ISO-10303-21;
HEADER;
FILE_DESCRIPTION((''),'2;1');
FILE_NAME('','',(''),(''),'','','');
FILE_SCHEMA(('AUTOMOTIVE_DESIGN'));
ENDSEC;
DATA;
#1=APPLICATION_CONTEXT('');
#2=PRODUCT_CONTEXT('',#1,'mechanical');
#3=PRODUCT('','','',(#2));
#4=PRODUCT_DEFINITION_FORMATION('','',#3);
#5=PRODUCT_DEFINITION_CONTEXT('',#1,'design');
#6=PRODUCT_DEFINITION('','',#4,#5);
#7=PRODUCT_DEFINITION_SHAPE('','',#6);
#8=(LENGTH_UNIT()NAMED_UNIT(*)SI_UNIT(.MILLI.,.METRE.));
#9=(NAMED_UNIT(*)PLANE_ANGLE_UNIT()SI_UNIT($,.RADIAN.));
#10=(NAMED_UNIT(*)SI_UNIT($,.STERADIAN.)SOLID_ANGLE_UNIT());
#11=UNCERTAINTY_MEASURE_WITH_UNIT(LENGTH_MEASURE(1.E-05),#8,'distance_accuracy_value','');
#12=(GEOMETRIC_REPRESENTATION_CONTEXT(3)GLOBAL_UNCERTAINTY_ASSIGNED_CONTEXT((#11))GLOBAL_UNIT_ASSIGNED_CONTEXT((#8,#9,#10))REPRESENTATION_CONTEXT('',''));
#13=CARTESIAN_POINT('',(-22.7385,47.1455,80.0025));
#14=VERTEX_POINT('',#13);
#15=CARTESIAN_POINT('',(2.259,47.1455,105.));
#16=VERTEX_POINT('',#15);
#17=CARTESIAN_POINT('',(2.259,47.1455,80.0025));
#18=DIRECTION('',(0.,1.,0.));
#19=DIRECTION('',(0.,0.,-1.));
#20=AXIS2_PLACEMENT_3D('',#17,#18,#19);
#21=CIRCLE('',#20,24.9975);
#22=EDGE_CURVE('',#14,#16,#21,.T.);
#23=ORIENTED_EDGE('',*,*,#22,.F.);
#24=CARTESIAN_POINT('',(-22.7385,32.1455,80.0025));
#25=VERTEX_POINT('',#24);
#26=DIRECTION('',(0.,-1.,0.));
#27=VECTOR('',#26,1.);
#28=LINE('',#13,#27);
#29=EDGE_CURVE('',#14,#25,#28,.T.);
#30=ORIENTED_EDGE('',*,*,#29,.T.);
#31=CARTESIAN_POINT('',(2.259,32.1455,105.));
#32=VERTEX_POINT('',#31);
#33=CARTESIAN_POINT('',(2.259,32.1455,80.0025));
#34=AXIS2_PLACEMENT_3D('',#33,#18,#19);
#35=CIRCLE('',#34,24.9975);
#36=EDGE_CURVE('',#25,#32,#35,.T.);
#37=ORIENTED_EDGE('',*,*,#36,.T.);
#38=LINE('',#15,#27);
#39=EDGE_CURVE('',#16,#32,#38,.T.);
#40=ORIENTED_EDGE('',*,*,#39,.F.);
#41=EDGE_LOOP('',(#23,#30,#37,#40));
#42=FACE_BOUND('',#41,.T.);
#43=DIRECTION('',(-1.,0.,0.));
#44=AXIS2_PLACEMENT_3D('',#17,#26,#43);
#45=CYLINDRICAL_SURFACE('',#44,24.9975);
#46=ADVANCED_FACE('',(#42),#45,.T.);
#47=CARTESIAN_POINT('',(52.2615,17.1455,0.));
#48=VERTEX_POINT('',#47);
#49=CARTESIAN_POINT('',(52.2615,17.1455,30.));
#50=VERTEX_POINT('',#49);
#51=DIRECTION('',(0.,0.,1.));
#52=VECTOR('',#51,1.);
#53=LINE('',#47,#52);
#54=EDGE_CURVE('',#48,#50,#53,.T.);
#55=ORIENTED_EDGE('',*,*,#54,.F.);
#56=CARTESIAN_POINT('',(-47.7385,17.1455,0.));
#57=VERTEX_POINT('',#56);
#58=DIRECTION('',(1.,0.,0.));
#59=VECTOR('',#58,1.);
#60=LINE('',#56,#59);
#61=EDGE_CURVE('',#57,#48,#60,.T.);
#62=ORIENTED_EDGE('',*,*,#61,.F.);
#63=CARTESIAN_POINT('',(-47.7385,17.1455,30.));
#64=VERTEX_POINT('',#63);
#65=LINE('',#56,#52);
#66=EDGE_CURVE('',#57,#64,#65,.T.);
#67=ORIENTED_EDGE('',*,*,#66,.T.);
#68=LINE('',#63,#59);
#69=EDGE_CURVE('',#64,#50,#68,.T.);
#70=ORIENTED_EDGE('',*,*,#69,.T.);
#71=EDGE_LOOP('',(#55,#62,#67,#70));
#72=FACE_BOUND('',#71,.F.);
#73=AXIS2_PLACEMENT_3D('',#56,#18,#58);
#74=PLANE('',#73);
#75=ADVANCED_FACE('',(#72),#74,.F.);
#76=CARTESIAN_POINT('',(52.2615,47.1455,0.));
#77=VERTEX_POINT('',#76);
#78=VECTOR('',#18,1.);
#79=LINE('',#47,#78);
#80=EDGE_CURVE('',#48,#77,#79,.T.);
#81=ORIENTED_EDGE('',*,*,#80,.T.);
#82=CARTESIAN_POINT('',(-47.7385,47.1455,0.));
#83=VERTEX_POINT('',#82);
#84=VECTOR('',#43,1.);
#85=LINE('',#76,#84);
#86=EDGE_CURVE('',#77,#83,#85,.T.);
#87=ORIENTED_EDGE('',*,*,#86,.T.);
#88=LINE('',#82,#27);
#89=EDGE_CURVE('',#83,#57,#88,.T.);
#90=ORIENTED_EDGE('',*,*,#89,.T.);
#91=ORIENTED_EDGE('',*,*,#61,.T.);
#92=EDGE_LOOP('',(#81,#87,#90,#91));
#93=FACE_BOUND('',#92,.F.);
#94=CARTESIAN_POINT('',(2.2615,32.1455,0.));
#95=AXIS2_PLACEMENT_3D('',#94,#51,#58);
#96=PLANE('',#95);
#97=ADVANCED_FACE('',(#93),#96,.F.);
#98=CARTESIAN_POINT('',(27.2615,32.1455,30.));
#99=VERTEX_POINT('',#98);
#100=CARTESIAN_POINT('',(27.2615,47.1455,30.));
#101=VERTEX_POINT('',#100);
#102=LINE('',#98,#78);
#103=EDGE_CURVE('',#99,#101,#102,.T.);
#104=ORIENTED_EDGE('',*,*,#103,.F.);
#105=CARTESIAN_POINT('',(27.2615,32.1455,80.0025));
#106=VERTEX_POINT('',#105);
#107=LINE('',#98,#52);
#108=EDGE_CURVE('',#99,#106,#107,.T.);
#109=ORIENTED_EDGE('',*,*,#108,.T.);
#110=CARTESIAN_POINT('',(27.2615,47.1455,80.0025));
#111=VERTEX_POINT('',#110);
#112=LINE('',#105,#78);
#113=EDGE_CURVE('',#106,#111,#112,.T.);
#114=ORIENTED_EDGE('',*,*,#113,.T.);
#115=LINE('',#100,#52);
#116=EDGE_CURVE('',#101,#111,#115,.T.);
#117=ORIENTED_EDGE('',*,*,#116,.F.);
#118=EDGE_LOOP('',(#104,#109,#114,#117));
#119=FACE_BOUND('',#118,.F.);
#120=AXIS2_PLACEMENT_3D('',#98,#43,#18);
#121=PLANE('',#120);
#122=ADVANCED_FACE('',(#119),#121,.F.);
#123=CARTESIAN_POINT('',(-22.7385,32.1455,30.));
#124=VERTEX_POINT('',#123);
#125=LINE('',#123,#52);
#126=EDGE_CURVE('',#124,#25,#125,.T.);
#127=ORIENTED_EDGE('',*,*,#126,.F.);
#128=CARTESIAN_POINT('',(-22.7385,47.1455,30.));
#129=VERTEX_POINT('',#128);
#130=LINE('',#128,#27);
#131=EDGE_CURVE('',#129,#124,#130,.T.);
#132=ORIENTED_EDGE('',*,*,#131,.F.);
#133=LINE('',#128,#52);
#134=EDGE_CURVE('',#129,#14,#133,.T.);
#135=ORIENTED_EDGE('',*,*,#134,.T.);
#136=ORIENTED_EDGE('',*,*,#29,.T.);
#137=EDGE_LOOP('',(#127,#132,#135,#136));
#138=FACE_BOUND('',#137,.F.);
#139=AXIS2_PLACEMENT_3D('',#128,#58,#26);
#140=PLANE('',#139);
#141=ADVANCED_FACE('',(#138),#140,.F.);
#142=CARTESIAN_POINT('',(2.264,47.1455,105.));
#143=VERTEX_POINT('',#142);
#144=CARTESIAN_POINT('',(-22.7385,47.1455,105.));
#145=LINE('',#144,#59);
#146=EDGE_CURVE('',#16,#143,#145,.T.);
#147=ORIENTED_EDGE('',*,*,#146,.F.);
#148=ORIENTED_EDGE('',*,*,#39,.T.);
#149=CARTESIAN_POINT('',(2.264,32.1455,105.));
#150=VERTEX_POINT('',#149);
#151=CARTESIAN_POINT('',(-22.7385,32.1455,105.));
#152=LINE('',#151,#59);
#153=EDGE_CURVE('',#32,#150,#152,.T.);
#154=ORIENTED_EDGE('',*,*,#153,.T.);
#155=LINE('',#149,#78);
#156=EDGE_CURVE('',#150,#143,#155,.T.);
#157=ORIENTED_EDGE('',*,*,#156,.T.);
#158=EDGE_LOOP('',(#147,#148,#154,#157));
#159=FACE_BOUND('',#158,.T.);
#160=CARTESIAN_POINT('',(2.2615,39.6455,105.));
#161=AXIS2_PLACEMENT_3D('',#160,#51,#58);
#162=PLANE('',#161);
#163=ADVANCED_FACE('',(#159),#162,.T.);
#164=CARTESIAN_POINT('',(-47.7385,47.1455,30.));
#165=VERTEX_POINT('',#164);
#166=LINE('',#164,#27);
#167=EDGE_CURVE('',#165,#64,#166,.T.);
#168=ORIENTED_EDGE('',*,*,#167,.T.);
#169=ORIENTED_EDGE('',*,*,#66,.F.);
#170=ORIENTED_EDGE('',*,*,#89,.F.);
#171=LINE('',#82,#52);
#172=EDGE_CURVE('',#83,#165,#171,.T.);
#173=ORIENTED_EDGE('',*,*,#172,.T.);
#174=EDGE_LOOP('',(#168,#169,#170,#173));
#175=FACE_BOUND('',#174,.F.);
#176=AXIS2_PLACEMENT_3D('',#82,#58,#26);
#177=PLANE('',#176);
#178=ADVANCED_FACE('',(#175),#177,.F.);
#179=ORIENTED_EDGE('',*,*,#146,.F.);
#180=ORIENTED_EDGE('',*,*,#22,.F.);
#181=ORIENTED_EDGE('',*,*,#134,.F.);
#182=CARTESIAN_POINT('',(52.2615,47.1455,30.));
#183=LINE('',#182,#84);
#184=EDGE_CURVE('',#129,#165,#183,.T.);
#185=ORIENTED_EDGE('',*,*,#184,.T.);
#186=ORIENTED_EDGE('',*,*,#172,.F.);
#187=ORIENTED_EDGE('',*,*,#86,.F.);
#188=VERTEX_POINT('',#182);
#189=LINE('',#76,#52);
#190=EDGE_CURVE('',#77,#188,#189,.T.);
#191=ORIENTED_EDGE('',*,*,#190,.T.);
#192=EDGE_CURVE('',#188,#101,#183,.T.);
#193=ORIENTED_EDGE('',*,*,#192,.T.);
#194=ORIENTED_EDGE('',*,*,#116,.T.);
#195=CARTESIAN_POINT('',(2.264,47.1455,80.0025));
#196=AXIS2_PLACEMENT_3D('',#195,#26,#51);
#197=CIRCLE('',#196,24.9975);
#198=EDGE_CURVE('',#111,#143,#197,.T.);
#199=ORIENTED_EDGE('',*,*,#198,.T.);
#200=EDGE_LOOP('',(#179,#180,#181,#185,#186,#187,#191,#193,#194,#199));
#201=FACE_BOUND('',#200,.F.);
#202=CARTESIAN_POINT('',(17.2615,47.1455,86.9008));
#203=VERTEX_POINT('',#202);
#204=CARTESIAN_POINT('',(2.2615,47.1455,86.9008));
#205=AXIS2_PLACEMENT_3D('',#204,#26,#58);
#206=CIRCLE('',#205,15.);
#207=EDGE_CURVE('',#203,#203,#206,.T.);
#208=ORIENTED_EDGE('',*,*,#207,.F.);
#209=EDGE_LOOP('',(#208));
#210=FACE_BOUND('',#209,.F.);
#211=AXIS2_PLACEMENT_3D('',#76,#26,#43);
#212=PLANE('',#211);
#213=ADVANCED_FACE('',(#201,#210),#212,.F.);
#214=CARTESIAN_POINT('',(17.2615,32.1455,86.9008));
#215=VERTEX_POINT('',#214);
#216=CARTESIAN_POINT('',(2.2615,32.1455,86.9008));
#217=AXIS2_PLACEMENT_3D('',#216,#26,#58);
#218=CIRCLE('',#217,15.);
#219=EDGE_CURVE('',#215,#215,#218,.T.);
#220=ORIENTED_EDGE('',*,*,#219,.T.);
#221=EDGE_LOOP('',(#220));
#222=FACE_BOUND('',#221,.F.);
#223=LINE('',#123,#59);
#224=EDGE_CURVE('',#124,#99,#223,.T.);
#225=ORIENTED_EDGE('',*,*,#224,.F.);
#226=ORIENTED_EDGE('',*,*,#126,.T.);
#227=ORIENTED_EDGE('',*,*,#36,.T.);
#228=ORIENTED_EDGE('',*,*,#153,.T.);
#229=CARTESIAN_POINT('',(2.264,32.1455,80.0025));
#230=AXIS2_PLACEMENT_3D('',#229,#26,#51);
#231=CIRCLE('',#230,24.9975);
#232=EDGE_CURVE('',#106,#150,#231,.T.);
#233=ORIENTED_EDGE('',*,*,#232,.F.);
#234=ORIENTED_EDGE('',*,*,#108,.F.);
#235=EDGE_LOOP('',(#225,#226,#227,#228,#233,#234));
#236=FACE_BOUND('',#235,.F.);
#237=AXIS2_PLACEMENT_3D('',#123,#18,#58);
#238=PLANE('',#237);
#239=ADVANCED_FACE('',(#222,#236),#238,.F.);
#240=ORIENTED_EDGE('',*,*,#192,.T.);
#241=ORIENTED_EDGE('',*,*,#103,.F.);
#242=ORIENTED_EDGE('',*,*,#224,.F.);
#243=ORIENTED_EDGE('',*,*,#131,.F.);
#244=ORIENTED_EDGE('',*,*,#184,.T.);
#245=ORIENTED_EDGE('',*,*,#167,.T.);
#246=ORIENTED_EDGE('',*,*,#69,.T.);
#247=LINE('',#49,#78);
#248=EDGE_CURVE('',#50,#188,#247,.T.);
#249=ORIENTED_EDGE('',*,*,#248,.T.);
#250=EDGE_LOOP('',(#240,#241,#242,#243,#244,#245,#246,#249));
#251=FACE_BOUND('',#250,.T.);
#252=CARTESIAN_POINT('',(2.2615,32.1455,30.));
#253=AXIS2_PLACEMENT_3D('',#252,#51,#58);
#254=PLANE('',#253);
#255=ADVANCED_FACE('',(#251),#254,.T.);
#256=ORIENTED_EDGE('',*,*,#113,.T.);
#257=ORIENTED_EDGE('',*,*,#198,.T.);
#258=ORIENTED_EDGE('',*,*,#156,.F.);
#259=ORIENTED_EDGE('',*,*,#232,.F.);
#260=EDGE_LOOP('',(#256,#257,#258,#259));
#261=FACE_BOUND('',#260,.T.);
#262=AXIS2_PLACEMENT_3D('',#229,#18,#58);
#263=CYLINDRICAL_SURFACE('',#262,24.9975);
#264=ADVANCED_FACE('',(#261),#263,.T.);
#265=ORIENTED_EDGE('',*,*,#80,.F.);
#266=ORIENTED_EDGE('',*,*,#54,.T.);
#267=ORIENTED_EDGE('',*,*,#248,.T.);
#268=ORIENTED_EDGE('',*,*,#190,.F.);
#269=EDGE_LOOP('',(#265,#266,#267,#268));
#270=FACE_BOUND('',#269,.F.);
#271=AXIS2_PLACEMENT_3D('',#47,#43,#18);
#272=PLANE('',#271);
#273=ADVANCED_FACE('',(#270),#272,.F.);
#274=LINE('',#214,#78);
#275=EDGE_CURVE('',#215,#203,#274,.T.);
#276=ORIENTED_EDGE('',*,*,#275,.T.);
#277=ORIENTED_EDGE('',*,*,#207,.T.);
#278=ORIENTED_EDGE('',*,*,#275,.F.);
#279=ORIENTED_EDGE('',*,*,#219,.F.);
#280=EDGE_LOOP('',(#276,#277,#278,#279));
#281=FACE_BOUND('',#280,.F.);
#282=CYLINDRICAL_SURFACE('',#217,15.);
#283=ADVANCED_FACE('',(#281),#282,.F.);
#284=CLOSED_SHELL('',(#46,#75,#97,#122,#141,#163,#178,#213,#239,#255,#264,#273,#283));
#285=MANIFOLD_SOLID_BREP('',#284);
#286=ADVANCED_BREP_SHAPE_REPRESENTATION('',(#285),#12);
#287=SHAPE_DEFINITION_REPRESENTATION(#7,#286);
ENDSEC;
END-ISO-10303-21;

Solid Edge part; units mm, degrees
sketch "Sketch1" plane through (0, 0, 0) normal (0, 0, 1) x (1, 0, 0)
  line L0 (-47.7385, 17.1455) -> (52.2615, 17.1455)
  line L1 (52.2615, 17.1455) -> (52.2615, 47.1455)
  line L2 (52.2615, 47.1455) -> (-47.7385, 47.1455)
  line L3 (-47.7385, 47.1455) -> (-47.7385, 17.1455)
extrude "Protrusion1" add sketch "Sketch1" along normal blind 30
sketch "Sketch2" plane through (2.2615, 32.1455, 30) normal (0, 0, 1) x (1, 0, 0)
  line L0 (-25, 15) -> (-25, 0)
  line L1 (-25, 0) -> (25, 0)
  line L2 (25, 0) -> (25, 15)
extrude "ExtrudedProtrusion_2" add sketch "Sketch2" along normal blind 75 material side at (-22.6885, 39.6455, 30)
sketch "Sketch3" plane through (2.2615, 32.1455, 67.5) normal (0, -1, 0) x (1, 0, 0)
  circle A0 centre (0, 19.4008) radius 15
extrude "ExtrudedCutout_1" cut sketch "Sketch3" against normal blind 235.9041
fillet "Round_1" radius 25 2 edges at (27.2615, 39.6455, 105) (-22.7385, 39.6455, 105)
